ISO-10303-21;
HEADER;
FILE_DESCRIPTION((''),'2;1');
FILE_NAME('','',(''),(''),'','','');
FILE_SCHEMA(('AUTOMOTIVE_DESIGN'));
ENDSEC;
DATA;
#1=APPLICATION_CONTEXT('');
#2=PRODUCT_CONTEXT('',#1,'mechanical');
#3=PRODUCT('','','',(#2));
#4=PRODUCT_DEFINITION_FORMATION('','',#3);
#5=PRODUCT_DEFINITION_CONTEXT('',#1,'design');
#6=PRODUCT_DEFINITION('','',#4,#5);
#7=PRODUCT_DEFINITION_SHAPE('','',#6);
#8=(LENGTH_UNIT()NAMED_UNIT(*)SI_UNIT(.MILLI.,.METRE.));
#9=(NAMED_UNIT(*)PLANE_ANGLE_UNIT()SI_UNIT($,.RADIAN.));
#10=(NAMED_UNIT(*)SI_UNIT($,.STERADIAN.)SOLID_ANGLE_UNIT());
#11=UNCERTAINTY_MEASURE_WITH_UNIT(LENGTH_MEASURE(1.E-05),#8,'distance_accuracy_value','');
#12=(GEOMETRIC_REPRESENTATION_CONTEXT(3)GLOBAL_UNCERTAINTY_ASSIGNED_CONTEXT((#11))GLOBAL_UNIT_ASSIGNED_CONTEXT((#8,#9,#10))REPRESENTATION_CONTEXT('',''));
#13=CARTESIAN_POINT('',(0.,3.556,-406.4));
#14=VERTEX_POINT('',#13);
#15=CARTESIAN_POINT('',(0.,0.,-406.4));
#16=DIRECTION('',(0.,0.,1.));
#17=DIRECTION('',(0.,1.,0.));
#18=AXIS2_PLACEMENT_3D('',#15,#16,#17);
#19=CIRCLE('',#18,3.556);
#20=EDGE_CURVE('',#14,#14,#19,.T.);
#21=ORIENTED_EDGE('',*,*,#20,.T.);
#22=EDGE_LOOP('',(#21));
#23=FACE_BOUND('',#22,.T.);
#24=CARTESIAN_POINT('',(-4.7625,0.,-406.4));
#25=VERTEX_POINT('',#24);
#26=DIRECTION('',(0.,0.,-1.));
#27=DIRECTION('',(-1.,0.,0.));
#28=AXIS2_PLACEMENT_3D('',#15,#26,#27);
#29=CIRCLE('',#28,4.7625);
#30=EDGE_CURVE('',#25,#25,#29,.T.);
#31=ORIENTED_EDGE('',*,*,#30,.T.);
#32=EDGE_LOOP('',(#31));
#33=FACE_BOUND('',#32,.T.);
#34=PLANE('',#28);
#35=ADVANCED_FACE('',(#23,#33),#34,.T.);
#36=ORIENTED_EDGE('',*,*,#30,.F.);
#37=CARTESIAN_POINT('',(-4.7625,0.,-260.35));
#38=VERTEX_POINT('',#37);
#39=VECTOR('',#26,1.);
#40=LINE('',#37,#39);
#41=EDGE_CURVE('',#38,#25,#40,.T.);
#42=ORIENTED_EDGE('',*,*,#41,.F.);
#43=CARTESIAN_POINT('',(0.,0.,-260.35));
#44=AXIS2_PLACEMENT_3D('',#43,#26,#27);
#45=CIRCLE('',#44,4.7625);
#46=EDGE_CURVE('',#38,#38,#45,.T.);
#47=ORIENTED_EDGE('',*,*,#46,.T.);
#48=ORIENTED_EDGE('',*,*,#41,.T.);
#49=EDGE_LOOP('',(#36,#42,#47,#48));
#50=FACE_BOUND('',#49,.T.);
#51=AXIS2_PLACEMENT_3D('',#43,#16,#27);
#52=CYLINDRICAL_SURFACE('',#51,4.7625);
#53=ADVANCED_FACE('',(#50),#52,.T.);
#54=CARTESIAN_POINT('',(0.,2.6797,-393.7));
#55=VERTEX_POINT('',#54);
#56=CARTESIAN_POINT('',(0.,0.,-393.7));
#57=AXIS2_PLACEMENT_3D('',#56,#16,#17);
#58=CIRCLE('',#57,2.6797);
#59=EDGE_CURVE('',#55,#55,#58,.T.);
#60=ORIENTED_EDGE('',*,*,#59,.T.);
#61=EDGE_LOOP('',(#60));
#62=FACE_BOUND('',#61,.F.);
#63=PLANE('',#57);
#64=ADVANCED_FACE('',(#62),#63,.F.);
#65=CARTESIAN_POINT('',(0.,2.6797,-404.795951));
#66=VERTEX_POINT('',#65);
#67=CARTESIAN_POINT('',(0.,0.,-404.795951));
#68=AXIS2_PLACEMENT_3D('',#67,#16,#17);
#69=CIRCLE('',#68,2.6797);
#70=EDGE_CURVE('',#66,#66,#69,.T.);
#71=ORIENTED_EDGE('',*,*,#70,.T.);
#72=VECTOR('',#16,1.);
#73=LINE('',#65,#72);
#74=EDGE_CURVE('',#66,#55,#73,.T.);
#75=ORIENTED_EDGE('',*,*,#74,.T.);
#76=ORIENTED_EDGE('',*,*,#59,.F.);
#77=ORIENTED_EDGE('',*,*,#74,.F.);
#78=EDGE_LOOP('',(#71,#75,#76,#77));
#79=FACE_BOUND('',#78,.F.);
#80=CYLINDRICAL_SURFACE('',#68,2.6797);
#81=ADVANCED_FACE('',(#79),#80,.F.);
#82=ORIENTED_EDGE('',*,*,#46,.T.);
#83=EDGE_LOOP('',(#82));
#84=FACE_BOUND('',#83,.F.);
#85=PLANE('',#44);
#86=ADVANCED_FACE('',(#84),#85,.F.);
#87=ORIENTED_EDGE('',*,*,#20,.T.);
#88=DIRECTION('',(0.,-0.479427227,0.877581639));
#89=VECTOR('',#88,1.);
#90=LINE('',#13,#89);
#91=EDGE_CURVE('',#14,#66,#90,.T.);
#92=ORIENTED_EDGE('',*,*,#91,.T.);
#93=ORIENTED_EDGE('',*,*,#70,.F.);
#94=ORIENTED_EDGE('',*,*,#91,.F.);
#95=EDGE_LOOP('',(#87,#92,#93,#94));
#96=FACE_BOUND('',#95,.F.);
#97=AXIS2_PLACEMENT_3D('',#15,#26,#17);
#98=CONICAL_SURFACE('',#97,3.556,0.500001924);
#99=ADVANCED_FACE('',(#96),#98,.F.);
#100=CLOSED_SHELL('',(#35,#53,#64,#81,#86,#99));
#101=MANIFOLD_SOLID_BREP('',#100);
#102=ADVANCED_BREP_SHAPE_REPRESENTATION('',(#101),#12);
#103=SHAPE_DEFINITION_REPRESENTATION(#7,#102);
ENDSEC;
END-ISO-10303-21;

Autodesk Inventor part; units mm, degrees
ref_plane "YZ Plane" through (0, 0, 0) normal (1, 0, 0) x (0, 1, 0)
ref_plane "XZ Plane" through (0, 0, 0) normal (0, 1, 0) x (-1, 0, 0)
ref_plane "XY Plane" through (0, 0, 0) normal (0, 0, 1) x (1, 0, 0)
surface "Composite1"
sketch "Sketch1" plane through (0, 0, -260.35) normal (0, 0, -1) x (-1, 0, 0)
  circle A0 centre (0, 0) radius 4.7625
  dimension "d13" = 9.525
extrude "Extrusion1" add sketch "Sketch1" along normal blind 146.05
hole "Hole1" at (0, 0, -406.4) direction (0, 0, 1) diameter 5.3594 depth 12.7 countersink diameter 7.112 countersink angle 57.296 thread size "1/4-28 UNF" class "2B" standard "ANSI Unified Screw Threads"
properties part number "rotary feedthrough (MDC 670024) length extension"
